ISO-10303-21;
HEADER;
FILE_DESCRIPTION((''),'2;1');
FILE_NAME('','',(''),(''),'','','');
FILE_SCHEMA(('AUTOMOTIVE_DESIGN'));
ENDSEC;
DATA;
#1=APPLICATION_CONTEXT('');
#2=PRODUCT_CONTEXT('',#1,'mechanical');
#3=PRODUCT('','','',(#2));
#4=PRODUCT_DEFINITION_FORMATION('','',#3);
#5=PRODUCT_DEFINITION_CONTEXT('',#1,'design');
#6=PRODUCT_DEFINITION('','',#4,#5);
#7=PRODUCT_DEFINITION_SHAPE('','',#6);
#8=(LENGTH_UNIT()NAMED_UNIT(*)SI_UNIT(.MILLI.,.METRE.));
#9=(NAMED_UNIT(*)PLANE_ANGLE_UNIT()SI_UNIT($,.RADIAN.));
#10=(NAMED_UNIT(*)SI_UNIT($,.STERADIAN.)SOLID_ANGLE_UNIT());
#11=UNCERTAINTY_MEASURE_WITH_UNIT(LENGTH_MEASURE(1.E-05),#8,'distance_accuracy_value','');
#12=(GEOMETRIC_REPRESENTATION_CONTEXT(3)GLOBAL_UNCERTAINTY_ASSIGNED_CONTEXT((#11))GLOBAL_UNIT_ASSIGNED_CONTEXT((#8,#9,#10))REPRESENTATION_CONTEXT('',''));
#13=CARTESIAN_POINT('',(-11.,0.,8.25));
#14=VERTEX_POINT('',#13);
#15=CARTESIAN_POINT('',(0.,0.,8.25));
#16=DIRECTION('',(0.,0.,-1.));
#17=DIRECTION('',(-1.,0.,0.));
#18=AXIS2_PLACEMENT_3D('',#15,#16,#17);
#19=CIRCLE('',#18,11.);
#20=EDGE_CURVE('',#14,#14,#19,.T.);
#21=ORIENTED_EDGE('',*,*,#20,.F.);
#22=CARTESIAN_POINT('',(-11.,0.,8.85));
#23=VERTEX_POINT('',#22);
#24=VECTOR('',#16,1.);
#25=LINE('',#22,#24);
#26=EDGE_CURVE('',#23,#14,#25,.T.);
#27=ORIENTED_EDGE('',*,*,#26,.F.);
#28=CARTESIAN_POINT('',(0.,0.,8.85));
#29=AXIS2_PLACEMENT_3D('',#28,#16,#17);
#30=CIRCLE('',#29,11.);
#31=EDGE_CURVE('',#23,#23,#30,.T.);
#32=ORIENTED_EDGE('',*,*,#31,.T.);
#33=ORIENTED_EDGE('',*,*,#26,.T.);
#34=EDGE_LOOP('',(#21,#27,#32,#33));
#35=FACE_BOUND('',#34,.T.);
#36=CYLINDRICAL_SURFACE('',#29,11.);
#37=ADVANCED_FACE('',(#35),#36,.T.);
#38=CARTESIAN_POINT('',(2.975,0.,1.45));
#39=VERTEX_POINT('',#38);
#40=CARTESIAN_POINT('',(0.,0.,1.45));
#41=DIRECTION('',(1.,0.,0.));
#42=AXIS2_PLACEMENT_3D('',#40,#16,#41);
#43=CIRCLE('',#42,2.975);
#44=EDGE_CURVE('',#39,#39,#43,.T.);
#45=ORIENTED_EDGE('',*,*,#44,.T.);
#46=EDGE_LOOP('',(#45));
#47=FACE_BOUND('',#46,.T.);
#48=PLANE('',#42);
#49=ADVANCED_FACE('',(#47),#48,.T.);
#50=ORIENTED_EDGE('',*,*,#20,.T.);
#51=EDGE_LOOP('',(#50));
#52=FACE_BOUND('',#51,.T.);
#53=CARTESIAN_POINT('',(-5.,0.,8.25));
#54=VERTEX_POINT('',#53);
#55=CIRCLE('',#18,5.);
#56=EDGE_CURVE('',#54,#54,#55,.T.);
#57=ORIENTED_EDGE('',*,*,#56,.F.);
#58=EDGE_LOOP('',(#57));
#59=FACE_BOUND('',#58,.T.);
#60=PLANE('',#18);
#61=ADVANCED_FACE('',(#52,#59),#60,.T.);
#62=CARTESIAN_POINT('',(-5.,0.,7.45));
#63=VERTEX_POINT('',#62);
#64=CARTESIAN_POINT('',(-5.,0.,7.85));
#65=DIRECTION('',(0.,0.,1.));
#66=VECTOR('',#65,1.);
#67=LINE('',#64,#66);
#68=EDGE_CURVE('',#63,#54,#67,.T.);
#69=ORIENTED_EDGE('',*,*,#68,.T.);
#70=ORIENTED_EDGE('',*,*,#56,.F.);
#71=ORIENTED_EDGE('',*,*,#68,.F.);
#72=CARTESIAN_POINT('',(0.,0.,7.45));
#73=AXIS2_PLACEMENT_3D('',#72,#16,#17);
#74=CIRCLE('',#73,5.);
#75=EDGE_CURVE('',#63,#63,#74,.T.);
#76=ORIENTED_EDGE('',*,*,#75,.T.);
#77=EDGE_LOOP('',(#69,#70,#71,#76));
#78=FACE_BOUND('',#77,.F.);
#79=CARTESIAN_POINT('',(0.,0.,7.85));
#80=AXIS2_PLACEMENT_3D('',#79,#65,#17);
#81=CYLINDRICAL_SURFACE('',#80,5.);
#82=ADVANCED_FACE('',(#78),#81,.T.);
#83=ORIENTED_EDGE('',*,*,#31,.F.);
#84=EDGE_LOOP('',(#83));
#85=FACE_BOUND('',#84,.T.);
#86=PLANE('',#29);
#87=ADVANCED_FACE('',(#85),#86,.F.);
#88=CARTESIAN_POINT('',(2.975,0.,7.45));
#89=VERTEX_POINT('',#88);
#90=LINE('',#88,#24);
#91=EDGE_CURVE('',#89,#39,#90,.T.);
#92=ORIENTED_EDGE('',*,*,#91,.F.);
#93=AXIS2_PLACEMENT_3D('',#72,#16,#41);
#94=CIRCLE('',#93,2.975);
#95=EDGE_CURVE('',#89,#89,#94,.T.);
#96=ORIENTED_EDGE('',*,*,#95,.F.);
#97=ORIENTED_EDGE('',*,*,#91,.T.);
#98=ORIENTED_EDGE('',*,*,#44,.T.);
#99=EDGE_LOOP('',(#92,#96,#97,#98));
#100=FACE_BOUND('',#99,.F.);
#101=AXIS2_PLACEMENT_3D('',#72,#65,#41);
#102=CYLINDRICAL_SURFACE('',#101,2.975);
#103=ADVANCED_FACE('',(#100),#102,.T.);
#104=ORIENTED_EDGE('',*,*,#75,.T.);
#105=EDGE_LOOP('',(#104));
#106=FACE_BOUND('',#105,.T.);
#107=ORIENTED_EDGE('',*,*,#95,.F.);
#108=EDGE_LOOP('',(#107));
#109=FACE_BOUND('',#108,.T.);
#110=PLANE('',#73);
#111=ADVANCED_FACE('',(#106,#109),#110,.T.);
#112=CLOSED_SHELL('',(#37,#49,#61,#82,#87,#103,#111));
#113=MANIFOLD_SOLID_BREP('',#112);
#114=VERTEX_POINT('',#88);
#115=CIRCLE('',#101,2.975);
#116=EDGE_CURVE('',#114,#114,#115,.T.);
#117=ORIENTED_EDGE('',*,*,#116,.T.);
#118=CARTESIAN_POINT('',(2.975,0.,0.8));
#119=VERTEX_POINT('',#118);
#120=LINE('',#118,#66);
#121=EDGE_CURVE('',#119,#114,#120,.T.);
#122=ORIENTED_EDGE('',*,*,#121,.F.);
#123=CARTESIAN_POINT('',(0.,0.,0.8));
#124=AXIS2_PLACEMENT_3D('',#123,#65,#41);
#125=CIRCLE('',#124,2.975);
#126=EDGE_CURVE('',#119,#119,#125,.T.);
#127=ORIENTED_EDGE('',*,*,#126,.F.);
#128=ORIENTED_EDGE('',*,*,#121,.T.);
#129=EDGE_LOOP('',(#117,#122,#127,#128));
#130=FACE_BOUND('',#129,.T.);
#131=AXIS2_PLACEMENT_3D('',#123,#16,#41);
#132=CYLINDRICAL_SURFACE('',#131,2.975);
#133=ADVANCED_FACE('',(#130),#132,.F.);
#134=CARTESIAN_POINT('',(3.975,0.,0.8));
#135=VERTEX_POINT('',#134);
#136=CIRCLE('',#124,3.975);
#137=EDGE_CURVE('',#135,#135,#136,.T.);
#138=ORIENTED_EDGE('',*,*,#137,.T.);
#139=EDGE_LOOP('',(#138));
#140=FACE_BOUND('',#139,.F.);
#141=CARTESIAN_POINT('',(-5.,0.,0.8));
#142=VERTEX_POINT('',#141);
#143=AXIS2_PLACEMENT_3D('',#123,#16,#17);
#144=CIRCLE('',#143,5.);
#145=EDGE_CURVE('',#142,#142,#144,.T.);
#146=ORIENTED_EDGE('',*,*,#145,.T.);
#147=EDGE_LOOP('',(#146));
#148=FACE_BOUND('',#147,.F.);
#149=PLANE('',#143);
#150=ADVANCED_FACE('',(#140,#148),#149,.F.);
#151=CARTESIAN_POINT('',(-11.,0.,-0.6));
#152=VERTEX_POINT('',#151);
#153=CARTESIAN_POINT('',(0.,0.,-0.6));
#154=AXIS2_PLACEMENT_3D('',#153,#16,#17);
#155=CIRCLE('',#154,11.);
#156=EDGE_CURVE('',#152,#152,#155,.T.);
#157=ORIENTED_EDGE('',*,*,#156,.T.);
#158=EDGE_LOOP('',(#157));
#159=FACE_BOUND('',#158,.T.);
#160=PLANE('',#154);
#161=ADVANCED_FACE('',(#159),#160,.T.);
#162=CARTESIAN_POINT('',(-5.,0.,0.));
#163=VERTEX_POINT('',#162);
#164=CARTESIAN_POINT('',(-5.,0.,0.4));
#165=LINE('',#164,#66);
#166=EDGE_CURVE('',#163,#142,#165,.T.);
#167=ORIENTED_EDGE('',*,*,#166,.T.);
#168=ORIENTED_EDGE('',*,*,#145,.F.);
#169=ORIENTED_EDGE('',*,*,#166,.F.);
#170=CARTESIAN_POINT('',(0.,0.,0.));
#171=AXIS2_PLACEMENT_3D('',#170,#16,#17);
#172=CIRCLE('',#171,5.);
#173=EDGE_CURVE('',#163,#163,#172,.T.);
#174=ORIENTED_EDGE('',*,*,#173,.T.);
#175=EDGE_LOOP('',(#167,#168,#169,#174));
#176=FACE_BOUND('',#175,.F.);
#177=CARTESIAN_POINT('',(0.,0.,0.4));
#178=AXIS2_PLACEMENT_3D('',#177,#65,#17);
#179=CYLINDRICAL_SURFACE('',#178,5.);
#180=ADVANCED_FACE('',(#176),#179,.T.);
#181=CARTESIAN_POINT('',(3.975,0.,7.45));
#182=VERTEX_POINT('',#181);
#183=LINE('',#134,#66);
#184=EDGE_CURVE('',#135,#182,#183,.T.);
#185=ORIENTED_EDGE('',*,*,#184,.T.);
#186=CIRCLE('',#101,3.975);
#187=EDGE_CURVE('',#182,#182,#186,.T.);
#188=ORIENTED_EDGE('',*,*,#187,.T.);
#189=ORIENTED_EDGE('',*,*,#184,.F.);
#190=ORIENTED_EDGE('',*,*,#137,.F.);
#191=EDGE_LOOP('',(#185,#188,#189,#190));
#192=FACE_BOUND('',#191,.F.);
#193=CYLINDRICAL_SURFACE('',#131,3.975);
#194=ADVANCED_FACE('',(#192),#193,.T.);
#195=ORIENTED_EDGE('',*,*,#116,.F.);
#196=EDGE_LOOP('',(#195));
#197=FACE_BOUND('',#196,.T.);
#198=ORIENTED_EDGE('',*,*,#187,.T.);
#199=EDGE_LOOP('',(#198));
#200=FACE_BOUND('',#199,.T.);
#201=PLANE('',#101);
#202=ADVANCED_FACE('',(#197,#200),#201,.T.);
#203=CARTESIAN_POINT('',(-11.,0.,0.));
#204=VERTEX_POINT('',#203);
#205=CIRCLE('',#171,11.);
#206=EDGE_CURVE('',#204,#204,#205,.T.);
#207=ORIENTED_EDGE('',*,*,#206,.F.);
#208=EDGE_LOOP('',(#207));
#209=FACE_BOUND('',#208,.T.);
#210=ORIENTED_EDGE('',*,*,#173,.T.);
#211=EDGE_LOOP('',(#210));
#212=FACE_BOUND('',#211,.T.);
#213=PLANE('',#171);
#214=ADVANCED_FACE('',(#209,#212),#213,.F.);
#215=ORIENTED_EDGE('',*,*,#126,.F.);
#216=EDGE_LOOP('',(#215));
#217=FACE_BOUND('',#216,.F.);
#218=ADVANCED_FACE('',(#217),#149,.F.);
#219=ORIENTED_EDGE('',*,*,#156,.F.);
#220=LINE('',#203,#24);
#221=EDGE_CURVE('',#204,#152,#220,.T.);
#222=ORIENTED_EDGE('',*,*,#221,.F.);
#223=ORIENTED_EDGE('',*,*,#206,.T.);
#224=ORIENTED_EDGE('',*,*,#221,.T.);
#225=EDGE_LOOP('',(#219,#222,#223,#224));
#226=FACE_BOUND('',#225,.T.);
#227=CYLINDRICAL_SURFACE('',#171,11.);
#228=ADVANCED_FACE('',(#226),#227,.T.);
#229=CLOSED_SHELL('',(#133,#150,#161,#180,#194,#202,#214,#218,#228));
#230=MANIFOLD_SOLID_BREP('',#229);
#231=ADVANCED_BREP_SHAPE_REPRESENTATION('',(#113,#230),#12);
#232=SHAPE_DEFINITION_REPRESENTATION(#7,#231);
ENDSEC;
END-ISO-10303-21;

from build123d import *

# Parameters (mm, degrees)
F0_W     = 5
F0_H     = 0.8
F2_R     = 3.975
F2_R_2   = 2.975
F3_DEPTH = 6.65
F5_R     = 2.975
F6_DEPTH = 6


# Not quite as in the source:
# - a feature names something its author has since deleted; it is built from what else it names


with BuildPart() as f1:
    # F0 (on Front) → F1 (revolve)
    with BuildSketch(Plane.XZ):
        with Locations((-2.5, 0.4)):
            Rectangle(F0_W, F0_H)
        Polygon((0, -0.6), (0, 0), (-5, 0), (-11, 0), (-11, -0.6), (-10.4, -0.6), align=None)
    revolve(axis=Axis((0, 0, 3.9109135978), (0, 0, -1)))

    # F2 (on face) → F3 (join)
    with BuildSketch(Plane.XY.offset(0.8)):
        Circle(F2_R)
        Circle(F2_R_2, mode=Mode.SUBTRACT)
    extrude(amount=F3_DEPTH)


with BuildPart() as f4:
    # F0 (on Front) → F4 (revolve)
    with BuildSketch(Plane.XZ):
        Polygon((-11, 8.85), (-11, 8.25), (-5, 8.25), (0, 8.25), (0, 8.85), (-10.4, 8.85), align=None)
        with Locations((-2.5, 7.85)):
            Rectangle(F0_W, F0_H)
    revolve(axis=Axis((0, 0, 3.9109135978), (0, 0, -1)))

    # F5 (on face) → F6 (join)
    with BuildSketch(Plane(origin=(0, 0, 7.45), x_dir=(1, 0, 0), z_dir=(0, 0, -1))):
        Circle(F5_R)
    extrude(amount=F6_DEPTH)


solid = Compound([f1.part, f4.part])
